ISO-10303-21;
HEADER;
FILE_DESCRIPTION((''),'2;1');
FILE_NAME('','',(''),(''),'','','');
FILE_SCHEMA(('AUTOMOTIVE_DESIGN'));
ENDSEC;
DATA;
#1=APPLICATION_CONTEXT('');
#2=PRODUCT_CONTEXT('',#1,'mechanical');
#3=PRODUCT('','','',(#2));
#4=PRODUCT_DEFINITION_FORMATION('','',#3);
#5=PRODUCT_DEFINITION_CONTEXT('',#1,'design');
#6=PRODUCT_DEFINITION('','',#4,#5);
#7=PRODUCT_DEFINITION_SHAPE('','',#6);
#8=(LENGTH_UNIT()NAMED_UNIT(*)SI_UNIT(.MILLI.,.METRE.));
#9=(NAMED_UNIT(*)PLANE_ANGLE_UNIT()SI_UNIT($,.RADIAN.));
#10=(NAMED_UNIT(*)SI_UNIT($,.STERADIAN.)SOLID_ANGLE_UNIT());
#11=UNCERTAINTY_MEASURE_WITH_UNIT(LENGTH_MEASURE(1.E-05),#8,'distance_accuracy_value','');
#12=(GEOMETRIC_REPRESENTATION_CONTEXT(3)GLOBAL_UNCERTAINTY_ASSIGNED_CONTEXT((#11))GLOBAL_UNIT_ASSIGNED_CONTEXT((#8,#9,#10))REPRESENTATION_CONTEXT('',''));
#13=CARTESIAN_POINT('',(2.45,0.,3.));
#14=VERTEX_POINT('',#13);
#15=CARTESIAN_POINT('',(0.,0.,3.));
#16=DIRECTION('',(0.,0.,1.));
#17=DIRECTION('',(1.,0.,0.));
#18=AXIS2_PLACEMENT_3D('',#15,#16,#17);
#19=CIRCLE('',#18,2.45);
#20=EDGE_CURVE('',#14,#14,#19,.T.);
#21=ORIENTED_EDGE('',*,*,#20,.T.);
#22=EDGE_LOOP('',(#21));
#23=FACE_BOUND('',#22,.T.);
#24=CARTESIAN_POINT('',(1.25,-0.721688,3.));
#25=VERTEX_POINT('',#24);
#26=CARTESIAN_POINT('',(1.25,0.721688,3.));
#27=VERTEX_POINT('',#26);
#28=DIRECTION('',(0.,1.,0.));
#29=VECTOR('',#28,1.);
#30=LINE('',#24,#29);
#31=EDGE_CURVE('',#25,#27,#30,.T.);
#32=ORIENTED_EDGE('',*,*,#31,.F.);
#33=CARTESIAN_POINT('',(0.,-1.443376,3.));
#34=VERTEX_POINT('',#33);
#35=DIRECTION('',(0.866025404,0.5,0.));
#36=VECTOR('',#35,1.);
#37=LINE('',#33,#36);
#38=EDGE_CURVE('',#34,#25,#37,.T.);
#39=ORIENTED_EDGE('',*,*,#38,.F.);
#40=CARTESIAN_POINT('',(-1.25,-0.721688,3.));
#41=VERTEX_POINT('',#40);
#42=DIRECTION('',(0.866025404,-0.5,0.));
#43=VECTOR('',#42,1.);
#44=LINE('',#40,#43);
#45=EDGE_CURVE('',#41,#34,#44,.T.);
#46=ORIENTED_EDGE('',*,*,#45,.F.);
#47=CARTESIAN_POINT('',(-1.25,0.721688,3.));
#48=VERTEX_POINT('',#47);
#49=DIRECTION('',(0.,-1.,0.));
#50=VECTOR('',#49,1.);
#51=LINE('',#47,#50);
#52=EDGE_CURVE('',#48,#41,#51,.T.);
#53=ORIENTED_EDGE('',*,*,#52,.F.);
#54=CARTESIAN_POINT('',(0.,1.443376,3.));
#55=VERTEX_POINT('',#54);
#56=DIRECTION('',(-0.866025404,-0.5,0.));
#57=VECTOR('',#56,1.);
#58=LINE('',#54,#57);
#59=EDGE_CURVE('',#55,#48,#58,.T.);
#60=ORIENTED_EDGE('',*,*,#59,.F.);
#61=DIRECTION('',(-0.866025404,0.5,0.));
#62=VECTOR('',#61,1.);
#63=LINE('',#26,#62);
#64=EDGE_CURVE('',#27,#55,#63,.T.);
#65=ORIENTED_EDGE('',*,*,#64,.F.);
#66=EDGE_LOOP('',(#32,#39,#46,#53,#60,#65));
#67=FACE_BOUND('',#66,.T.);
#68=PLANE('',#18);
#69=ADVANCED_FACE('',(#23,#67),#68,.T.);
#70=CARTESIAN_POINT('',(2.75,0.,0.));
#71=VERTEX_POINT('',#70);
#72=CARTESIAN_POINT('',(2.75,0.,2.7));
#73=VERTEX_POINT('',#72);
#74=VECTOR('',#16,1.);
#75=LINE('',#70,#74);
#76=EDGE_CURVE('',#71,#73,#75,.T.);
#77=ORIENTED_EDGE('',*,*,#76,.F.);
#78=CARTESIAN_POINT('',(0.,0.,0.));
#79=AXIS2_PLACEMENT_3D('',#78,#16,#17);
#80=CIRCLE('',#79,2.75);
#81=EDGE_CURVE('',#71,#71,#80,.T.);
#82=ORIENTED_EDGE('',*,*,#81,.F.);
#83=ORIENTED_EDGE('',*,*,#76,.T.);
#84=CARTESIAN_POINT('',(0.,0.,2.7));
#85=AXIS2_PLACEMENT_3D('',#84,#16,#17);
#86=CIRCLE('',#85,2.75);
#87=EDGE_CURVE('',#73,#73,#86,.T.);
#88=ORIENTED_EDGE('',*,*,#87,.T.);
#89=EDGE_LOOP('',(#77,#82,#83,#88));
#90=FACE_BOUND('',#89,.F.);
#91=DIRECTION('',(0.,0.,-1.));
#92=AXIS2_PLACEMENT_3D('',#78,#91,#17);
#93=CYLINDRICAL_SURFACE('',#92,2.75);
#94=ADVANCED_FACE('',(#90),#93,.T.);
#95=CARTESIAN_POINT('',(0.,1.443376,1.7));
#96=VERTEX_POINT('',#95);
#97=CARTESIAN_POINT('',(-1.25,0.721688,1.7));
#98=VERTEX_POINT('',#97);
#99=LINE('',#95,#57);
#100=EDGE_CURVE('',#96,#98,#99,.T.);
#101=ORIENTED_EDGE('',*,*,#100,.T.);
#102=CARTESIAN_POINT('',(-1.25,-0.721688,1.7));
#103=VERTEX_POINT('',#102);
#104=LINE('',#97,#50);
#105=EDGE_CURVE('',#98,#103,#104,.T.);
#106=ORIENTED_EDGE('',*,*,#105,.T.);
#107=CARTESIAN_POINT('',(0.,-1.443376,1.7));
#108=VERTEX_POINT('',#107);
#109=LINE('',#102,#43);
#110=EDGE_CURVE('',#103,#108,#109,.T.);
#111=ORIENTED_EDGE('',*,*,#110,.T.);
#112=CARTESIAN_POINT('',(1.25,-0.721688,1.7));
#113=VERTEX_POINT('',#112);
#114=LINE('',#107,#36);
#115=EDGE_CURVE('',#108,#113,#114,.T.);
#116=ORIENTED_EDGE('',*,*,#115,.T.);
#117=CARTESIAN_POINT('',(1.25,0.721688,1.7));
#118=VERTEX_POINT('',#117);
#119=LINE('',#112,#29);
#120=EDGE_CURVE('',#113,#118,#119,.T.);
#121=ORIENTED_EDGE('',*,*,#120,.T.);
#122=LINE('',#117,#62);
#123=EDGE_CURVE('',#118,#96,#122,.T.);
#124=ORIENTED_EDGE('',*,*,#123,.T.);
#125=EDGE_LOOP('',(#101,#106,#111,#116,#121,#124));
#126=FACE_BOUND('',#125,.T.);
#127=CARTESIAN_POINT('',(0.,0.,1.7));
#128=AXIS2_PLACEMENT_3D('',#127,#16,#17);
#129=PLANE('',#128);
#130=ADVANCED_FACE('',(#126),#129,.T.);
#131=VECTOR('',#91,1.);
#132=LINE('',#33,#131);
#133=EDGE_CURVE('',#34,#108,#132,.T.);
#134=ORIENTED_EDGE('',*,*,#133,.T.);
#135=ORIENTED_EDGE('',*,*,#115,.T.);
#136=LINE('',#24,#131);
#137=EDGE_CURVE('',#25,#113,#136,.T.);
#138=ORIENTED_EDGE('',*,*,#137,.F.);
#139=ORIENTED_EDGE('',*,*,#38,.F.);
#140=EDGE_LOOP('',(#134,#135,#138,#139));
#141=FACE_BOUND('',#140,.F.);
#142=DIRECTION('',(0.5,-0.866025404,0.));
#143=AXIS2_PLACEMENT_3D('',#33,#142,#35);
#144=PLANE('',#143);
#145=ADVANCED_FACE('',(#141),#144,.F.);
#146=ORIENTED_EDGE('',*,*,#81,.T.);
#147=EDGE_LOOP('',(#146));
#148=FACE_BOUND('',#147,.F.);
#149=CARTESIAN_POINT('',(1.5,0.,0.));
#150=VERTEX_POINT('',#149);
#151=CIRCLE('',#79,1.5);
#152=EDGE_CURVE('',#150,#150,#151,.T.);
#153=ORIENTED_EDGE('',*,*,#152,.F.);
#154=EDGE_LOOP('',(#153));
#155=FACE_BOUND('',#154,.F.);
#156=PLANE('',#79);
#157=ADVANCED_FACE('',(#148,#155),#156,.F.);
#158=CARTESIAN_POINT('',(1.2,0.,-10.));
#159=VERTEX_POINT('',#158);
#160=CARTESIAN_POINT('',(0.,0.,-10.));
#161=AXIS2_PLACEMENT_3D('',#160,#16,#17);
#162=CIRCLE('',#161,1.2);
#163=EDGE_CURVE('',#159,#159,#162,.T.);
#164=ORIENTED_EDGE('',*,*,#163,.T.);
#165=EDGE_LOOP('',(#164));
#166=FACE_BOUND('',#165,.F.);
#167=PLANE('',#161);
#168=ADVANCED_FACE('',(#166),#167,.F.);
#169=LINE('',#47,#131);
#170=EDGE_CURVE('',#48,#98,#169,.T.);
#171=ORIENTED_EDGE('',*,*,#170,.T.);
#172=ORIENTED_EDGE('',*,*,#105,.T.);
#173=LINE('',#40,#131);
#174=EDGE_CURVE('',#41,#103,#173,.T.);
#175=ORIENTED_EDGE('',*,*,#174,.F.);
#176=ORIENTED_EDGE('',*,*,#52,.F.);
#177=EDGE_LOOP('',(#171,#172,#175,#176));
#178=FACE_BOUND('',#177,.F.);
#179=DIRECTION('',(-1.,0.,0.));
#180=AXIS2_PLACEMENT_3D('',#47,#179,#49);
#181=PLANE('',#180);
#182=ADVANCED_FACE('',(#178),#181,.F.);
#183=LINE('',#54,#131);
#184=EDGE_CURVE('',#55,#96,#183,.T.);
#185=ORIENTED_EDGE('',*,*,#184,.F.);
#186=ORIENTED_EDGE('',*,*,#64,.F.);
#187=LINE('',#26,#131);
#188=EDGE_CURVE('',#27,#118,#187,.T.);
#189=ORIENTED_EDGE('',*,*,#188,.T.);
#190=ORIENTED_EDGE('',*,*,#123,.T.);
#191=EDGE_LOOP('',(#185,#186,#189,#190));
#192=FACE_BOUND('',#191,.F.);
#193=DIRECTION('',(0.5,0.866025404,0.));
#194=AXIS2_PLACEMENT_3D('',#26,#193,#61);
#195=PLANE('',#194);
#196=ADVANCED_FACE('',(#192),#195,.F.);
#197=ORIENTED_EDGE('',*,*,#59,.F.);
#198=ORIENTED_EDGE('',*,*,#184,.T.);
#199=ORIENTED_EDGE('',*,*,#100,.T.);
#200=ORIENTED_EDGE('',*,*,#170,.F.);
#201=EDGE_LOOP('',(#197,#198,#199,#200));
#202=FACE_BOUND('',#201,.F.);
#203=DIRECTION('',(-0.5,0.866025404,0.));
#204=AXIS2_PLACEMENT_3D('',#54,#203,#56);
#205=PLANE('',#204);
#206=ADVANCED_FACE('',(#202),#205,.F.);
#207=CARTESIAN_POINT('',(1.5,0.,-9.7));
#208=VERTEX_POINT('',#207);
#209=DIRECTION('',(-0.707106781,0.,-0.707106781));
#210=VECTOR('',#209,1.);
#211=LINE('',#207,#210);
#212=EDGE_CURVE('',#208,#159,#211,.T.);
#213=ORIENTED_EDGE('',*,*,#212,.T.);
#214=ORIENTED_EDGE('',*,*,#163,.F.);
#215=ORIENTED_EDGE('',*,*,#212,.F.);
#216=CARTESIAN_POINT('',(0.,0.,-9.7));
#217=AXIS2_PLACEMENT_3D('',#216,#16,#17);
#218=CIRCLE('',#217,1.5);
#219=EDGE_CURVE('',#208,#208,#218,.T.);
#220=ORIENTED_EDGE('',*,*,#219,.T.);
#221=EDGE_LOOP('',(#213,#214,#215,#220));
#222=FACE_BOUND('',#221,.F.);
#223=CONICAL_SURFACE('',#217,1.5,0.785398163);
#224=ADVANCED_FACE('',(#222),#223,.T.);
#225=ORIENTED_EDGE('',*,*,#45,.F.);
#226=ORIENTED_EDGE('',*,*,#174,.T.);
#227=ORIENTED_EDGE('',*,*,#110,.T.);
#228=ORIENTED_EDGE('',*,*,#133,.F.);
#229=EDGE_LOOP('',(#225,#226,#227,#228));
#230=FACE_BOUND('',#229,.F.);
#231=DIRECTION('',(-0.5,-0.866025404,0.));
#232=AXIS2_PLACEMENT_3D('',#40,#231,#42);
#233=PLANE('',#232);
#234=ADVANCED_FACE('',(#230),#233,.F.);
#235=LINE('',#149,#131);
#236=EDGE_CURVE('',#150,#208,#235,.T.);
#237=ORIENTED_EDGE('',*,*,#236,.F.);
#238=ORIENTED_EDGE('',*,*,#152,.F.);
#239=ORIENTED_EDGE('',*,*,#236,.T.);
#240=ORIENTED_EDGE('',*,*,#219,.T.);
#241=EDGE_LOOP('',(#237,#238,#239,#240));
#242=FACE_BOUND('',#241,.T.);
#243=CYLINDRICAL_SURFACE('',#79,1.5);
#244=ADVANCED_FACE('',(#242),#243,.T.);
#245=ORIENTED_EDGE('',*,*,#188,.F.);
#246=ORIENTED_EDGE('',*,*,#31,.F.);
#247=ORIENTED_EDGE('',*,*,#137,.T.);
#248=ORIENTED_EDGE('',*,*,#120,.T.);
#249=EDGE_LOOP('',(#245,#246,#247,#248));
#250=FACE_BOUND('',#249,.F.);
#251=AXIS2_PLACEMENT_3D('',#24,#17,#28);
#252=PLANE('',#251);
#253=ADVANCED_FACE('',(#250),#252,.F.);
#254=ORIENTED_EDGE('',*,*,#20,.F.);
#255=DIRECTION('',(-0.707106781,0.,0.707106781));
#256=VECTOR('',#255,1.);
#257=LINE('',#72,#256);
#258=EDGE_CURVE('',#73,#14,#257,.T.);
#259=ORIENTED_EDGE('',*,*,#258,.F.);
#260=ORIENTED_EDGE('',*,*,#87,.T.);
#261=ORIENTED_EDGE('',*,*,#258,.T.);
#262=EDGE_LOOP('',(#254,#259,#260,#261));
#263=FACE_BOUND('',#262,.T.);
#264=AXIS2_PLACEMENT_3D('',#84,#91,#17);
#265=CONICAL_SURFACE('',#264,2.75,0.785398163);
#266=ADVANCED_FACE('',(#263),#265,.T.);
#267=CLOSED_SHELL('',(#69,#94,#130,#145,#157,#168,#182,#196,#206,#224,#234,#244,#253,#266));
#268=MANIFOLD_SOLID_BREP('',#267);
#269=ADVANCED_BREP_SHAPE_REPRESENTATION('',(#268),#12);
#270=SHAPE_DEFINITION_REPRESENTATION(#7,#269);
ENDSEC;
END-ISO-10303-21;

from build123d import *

# Parameters (mm, degrees)
F2_R      = 1.5
F3_DEPTH  = 10
F2_R_2    = 2.75
F3_FACE_R = 1.5
F4_DEPTH  = 3
F5_SIZE   = 0.3
F7_DEPTH  = 1.3


with BuildPart() as f3:
    # F2 (on Top) → F3 (new body)
    with BuildSketch(Plane.XY):
        Circle(F2_R)
    extrude(amount=-F3_DEPTH)

    # F2 (on Top) + F3_face (on face) → F4 (join)
    with BuildSketch(Plane.XY):
        Circle(F2_R_2)
        Circle(F2_R, mode=Mode.SUBTRACT)
    with BuildSketch(Plane.XY):
        Circle(F3_FACE_R)
    extrude(amount=F4_DEPTH)

    # F5
    f5_edges = [f3.edges().sort_by_distance(p)[0] for p in [
        (-1.5, 0, -10),
        (-2.75, 0, 3),
    ]]
    chamfer(f5_edges, length=F5_SIZE)

    # F6 (on face) → F7 (cut)
    with BuildSketch(Plane.XY.offset(3)):
        Polygon((1.25, -0.7216878365), (1.25, 0.7216878365), (0, 1.443375673), (-1.25, 0.7216878365), (-1.25, -0.7216878365), (0, -1.443375673), align=None)
    extrude(amount=-F7_DEPTH, mode=Mode.SUBTRACT)


solid = f3.part
